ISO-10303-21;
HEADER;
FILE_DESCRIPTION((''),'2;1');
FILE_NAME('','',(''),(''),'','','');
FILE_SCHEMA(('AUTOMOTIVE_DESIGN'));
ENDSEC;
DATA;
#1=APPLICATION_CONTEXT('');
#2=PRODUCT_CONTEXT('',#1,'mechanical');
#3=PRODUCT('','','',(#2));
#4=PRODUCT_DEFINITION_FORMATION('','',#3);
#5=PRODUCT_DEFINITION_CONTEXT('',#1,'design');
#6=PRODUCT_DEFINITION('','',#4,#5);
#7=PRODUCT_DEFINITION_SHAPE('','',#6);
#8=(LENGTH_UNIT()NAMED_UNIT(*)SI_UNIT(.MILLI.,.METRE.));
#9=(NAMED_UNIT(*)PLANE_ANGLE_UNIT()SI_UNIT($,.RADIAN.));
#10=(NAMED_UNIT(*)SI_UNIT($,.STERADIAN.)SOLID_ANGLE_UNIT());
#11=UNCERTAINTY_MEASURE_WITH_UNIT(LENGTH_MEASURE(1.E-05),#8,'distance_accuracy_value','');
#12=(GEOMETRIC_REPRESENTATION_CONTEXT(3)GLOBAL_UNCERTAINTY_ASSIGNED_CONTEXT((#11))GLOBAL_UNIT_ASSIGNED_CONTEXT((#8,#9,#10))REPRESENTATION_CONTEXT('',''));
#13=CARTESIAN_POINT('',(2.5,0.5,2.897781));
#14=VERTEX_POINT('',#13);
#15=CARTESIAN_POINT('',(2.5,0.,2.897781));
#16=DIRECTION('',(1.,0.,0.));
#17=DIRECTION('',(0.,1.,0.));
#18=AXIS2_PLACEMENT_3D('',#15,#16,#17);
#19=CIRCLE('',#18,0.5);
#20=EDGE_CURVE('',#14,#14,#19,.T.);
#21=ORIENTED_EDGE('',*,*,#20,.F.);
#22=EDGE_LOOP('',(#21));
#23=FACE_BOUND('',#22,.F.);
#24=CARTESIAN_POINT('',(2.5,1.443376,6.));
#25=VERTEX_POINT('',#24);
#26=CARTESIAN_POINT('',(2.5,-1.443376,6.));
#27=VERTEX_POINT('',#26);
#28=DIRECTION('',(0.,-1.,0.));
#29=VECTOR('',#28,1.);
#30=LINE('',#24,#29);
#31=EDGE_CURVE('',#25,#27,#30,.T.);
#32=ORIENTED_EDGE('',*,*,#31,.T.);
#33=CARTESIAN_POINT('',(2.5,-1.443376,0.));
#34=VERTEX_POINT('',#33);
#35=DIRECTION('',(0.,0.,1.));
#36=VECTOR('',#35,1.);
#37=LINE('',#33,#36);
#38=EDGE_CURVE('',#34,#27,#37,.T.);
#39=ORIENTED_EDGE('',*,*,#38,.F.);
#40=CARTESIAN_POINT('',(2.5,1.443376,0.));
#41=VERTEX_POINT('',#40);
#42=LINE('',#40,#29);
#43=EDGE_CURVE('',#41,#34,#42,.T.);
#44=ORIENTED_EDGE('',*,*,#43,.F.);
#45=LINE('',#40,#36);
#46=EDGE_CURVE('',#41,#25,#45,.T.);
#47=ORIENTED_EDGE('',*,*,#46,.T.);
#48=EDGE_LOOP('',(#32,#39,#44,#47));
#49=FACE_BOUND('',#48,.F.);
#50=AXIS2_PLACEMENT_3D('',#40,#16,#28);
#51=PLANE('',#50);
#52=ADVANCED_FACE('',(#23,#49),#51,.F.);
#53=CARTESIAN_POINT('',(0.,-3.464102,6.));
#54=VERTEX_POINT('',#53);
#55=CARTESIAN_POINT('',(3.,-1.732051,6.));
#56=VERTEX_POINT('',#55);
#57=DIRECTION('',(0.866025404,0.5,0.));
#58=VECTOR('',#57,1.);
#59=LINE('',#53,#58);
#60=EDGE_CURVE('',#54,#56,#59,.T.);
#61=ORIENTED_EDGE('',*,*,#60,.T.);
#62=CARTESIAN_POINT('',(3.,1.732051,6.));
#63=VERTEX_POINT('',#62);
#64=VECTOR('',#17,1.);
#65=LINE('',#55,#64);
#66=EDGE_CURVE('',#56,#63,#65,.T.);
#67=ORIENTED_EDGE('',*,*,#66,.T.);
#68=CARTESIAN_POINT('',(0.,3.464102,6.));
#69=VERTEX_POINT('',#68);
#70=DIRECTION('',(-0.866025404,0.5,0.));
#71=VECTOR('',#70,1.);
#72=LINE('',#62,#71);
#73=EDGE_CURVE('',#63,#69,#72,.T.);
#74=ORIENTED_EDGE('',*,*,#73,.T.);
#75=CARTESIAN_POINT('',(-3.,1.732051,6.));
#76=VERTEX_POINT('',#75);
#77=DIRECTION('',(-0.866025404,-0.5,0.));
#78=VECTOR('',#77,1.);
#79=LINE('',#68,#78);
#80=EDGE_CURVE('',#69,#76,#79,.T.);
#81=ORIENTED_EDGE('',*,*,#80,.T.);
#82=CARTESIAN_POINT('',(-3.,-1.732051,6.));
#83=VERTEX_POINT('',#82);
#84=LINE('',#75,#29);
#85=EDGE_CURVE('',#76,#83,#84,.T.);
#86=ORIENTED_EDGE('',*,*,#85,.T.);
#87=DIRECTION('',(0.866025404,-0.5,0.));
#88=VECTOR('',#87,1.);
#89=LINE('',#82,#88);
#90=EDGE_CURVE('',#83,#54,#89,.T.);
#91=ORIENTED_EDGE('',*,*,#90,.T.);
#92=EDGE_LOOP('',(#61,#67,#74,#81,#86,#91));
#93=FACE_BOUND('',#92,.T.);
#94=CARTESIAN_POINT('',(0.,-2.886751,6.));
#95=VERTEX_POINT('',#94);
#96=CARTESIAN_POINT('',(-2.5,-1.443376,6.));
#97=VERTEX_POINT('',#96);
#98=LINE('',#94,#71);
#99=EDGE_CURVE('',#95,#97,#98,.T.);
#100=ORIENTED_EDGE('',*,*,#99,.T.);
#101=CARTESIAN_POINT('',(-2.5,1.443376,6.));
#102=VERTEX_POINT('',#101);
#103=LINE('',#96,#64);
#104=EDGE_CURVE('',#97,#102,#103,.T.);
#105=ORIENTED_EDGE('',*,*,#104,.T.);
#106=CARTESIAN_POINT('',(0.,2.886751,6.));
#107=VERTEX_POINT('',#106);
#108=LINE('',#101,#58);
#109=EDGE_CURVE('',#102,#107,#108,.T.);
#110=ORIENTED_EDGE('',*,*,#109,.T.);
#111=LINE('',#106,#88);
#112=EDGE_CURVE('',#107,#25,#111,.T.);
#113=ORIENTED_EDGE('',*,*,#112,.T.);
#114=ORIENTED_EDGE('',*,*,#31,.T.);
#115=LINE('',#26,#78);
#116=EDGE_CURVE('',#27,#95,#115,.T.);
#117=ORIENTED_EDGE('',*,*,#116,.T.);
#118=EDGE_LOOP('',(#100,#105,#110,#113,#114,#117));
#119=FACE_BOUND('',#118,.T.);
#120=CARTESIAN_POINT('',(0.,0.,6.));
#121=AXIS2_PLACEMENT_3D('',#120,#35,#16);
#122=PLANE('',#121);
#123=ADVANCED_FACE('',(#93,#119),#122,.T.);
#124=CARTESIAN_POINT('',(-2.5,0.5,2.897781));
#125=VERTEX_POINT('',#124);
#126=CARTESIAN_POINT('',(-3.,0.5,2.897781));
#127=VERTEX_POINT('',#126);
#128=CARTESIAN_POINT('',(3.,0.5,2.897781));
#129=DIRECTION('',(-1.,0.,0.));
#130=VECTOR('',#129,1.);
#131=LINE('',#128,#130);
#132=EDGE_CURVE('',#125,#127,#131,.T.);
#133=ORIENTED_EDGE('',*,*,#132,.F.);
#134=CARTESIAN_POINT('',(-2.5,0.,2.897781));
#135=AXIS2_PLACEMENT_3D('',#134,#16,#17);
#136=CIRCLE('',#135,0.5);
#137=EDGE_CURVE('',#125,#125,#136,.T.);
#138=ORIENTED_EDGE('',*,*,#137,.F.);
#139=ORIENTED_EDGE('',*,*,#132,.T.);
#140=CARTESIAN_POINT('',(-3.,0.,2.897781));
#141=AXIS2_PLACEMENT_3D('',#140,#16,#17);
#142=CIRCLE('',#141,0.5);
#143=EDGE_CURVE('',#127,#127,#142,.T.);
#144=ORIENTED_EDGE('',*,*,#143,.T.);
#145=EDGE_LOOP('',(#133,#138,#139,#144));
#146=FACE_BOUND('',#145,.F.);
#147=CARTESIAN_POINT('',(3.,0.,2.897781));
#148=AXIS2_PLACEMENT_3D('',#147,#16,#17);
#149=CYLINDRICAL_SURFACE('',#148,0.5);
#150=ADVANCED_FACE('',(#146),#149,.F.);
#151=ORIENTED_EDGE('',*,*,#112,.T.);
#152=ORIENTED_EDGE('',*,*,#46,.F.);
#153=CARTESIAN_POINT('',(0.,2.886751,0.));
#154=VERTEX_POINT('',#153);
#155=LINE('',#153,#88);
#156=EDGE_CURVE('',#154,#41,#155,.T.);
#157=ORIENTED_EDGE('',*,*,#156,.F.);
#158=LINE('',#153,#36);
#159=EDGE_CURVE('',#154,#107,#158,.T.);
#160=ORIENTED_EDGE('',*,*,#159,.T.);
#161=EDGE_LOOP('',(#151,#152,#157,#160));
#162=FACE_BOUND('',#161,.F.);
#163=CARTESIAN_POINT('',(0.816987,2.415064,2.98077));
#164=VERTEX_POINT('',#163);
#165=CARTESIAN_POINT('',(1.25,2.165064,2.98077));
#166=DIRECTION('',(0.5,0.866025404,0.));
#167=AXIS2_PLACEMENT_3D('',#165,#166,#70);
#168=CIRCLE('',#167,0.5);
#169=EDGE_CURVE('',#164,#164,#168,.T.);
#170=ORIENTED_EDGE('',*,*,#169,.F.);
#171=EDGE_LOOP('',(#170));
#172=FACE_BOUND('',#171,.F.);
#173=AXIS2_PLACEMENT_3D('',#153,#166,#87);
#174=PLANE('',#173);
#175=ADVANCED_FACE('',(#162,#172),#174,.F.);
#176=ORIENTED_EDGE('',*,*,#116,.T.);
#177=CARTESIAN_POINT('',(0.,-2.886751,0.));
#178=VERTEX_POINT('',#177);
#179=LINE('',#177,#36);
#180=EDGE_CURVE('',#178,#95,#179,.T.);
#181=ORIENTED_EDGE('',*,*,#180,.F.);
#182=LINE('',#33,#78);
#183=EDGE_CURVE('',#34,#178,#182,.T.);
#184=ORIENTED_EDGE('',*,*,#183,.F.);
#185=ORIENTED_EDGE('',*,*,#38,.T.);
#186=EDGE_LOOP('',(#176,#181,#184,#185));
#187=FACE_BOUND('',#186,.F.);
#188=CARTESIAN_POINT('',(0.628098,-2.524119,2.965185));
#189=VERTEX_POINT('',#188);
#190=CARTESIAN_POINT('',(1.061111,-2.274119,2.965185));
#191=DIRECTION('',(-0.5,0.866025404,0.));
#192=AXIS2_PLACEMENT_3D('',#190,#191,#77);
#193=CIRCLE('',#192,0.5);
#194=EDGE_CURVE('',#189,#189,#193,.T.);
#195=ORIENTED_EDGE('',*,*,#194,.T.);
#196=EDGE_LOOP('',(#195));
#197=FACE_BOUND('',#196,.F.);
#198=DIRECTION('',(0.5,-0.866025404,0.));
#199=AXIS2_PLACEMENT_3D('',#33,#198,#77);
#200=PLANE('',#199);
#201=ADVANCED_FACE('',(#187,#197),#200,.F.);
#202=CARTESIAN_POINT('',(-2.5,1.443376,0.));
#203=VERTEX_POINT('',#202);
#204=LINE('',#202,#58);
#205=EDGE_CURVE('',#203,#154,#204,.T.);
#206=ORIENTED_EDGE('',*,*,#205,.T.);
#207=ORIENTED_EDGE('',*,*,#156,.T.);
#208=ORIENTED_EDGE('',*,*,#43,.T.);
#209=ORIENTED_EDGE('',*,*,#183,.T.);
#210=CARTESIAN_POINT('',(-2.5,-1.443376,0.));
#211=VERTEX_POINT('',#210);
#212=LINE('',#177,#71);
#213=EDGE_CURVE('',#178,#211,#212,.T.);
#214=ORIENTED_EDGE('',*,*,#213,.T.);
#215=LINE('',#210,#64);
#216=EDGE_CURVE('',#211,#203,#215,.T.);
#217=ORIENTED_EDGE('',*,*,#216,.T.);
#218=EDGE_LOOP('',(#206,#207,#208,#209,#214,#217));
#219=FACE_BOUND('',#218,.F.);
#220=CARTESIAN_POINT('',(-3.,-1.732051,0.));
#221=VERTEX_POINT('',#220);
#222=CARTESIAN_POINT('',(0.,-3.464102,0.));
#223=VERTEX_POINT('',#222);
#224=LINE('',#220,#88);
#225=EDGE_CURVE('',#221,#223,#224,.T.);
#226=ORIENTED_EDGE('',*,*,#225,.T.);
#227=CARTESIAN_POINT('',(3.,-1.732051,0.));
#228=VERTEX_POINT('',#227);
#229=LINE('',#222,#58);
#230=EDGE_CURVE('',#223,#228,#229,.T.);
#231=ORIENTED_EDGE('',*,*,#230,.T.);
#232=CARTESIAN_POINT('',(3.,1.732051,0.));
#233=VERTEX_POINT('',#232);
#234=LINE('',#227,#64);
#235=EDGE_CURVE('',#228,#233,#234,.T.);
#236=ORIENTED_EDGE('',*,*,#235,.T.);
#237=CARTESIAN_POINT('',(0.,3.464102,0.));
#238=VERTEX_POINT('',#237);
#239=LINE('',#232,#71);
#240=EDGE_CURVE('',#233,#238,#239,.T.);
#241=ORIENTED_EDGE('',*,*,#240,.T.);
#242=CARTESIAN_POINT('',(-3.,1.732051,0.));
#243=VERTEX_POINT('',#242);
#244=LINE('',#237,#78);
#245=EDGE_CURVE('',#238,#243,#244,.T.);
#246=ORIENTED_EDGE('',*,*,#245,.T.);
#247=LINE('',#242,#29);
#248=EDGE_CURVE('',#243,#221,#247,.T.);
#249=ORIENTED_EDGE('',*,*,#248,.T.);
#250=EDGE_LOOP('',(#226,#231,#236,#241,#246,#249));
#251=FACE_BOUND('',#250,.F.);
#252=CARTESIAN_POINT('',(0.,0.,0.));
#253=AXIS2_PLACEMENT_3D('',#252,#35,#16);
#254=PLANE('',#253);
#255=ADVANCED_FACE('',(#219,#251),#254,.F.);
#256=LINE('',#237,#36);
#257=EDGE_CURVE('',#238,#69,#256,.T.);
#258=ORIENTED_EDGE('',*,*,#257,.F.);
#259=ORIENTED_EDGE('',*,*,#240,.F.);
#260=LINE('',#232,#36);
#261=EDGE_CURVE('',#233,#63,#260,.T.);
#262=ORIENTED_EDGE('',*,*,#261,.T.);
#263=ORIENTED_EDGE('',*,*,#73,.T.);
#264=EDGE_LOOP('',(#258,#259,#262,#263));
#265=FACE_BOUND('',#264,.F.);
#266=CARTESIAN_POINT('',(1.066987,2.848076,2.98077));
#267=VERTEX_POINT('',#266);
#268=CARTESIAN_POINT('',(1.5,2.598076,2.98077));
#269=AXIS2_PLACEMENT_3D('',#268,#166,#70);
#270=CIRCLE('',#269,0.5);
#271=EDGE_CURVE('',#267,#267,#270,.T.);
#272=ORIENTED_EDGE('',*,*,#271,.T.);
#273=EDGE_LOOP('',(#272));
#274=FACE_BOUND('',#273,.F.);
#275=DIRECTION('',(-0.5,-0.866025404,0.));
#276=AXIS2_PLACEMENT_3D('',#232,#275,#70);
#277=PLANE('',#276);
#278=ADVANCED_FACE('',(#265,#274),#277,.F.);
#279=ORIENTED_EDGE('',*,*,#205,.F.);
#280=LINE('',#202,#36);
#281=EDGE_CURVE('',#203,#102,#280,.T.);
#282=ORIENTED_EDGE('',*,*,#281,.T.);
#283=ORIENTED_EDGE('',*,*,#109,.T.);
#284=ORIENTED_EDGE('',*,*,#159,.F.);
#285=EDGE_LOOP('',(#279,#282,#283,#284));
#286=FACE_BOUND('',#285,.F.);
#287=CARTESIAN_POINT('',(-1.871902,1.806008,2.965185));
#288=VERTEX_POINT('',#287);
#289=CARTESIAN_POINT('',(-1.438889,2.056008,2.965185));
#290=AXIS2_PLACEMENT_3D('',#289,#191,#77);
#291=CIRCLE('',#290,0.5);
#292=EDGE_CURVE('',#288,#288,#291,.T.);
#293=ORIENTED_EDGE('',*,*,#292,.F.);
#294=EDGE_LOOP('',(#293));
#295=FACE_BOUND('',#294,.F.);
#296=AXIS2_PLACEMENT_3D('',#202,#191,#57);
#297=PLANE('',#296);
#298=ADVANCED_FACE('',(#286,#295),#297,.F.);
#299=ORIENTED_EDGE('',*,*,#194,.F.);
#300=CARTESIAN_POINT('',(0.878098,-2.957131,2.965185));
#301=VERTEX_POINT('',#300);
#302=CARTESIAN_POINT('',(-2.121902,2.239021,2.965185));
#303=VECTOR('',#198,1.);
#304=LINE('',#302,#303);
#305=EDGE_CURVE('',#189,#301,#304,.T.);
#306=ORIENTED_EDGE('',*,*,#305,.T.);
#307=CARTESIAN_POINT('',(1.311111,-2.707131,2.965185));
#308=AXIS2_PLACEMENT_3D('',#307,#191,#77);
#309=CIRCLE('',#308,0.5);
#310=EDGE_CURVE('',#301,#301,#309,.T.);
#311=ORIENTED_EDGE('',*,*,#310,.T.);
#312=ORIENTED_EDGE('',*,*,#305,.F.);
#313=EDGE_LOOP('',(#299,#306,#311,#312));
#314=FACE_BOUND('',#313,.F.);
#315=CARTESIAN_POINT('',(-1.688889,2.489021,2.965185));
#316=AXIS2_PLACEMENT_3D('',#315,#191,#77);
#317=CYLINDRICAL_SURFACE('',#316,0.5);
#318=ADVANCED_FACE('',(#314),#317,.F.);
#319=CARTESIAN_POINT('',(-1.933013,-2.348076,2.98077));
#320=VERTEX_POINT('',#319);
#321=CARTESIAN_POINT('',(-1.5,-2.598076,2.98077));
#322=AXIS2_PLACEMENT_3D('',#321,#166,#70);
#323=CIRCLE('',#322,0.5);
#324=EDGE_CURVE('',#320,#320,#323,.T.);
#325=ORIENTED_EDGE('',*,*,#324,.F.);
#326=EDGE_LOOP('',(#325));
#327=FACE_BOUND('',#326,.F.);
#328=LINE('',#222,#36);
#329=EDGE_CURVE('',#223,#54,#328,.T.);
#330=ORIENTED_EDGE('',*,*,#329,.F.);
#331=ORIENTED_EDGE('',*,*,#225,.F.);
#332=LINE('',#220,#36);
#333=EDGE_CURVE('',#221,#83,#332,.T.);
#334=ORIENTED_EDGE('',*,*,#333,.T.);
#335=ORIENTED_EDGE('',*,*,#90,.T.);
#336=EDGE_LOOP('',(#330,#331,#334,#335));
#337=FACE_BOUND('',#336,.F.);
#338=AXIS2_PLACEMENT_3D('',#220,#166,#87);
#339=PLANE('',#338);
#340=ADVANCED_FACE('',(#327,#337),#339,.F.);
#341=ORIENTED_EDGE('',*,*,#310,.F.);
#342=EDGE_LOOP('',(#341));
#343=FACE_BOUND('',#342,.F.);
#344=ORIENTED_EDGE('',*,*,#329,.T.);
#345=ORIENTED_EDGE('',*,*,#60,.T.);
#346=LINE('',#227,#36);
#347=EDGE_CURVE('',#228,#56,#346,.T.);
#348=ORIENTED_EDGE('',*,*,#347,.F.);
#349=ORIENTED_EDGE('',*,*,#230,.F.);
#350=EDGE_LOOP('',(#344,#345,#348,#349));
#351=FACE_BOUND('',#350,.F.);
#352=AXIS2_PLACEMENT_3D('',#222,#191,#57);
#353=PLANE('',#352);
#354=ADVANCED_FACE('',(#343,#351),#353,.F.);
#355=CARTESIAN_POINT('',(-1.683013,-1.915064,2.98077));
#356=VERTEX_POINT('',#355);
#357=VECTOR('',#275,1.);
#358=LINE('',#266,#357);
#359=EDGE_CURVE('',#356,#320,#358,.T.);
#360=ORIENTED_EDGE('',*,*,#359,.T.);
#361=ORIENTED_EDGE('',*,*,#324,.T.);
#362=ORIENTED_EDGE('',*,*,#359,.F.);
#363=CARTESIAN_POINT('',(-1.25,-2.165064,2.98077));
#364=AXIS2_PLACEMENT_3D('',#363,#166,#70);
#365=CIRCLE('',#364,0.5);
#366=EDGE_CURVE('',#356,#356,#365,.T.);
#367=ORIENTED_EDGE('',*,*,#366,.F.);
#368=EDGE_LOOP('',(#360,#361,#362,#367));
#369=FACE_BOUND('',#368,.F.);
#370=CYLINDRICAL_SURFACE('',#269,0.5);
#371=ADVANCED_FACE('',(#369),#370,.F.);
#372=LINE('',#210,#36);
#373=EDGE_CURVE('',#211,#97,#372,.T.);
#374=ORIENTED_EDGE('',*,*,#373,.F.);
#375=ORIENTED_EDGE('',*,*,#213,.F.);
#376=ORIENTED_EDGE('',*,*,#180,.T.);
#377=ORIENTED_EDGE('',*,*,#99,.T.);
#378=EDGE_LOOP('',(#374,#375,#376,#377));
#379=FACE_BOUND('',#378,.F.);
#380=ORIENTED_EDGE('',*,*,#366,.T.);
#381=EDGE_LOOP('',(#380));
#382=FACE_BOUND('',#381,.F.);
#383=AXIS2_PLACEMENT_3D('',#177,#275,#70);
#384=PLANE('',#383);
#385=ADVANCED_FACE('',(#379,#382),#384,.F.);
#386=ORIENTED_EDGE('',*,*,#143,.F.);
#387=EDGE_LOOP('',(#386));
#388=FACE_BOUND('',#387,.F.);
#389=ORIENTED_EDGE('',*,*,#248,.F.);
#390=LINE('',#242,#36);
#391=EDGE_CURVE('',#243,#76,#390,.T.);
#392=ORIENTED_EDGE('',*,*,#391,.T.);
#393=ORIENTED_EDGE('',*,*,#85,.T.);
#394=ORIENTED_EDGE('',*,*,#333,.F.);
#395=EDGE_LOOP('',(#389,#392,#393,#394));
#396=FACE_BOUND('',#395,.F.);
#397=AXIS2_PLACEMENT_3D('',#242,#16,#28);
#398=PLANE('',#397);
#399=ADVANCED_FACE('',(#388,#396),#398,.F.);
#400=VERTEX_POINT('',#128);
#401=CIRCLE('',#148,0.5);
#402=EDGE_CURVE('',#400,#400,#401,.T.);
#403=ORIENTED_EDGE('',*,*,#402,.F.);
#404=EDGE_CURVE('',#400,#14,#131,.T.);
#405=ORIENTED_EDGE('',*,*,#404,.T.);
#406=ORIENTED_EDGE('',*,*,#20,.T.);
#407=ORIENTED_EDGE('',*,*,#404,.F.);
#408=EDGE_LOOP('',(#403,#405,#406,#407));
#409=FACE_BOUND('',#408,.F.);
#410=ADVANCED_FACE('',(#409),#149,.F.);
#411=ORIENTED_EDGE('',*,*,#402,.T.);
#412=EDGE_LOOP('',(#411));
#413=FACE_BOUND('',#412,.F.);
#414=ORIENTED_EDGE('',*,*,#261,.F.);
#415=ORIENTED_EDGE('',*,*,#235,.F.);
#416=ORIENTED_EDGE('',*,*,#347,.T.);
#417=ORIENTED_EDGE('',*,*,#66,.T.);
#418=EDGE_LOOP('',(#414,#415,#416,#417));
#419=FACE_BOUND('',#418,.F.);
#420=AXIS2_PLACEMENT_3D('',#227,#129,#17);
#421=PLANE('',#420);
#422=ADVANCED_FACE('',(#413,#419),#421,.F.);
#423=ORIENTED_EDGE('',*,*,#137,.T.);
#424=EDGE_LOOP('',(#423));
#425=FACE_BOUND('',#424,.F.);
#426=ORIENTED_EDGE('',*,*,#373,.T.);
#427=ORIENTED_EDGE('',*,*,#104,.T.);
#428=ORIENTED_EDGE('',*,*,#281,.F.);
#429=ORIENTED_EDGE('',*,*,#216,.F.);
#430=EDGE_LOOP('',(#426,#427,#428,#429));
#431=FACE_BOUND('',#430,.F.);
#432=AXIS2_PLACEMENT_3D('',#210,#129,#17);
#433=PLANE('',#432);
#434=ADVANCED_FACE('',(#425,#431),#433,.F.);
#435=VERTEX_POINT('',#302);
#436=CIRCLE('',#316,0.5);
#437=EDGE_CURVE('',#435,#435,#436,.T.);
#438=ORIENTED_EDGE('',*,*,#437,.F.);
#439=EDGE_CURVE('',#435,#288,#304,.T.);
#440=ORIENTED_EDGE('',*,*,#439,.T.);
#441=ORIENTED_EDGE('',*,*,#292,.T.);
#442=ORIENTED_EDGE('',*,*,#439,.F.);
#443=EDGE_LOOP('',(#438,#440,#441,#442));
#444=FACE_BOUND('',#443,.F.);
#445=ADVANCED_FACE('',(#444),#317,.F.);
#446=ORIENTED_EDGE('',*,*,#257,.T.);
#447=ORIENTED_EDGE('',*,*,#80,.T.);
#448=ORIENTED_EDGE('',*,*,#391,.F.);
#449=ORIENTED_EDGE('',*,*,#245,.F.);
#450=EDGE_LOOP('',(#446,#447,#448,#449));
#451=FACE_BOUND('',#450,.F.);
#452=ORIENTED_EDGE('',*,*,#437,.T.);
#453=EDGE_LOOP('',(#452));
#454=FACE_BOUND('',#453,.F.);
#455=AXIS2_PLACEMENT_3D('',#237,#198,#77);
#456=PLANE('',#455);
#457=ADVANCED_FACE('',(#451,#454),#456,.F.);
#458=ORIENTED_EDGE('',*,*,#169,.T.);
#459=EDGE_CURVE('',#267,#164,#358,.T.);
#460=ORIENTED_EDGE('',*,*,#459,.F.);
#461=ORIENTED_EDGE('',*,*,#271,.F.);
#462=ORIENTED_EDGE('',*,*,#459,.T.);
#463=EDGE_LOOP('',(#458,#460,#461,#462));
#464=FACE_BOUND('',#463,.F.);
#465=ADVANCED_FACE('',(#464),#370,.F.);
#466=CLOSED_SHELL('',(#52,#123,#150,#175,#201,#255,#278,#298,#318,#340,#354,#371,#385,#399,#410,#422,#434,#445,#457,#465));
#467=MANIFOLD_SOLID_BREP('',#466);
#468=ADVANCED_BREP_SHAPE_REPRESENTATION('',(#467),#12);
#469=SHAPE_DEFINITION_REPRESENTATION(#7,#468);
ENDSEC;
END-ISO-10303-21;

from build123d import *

# Parameters (mm, degrees)
F1_DEPTH = 6
F2_R     = 0.5
F3_DEPTH = 10
F4_R     = 0.5
F5_DEPTH = 10
F6_R     = 0.5
F7_DEPTH = 10


with BuildPart() as f1:
    # F0 (on Top) → F1 (new body)
    with BuildSketch(Plane.XY):
        Polygon((-3, 1.7320508076), (-3, -1.7320508076), (0, -3.4641016151), (3, -1.7320508076), (3, 1.7320508076), (0, 3.4641016151), align=None)
        Polygon((0, -2.8867513459), (-2.5, -1.443375673), (-2.5, 1.443375673), (0, 2.8867513459), (2.5, 1.443375673), (2.5, -1.443375673), align=None, mode=Mode.SUBTRACT)
    extrude(amount=F1_DEPTH)

    # F2 (on face) → F3 (cut)
    with BuildSketch(Plane.YZ.offset(3)):
        with Locations((0, 2.8977813589)):
            Circle(F2_R)
    extrude(amount=-F3_DEPTH, mode=Mode.SUBTRACT)

    # F4 (on face) → F5 (cut)
    with BuildSketch(Plane(origin=(1.5, 2.5980762114, 0), x_dir=(-0.8660254038, 0.5, 0), z_dir=(0.5, 0.8660254038, 0))):
        with Locations((0, 2.9807699823)):
            Circle(F4_R)
    extrude(amount=-F5_DEPTH, mode=Mode.SUBTRACT)

    # F6 (on face) → F7 (cut)
    with BuildSketch(Plane(origin=(-1.5, 2.5980762114, 0), x_dir=(-0.8660254038, -0.5, 0), z_dir=(-0.5, 0.8660254038, 0))):
        with Locations((0.2181102464, 2.9651848599)):
            Circle(F6_R)
    extrude(amount=-F7_DEPTH, mode=Mode.SUBTRACT)


solid = f1.part
